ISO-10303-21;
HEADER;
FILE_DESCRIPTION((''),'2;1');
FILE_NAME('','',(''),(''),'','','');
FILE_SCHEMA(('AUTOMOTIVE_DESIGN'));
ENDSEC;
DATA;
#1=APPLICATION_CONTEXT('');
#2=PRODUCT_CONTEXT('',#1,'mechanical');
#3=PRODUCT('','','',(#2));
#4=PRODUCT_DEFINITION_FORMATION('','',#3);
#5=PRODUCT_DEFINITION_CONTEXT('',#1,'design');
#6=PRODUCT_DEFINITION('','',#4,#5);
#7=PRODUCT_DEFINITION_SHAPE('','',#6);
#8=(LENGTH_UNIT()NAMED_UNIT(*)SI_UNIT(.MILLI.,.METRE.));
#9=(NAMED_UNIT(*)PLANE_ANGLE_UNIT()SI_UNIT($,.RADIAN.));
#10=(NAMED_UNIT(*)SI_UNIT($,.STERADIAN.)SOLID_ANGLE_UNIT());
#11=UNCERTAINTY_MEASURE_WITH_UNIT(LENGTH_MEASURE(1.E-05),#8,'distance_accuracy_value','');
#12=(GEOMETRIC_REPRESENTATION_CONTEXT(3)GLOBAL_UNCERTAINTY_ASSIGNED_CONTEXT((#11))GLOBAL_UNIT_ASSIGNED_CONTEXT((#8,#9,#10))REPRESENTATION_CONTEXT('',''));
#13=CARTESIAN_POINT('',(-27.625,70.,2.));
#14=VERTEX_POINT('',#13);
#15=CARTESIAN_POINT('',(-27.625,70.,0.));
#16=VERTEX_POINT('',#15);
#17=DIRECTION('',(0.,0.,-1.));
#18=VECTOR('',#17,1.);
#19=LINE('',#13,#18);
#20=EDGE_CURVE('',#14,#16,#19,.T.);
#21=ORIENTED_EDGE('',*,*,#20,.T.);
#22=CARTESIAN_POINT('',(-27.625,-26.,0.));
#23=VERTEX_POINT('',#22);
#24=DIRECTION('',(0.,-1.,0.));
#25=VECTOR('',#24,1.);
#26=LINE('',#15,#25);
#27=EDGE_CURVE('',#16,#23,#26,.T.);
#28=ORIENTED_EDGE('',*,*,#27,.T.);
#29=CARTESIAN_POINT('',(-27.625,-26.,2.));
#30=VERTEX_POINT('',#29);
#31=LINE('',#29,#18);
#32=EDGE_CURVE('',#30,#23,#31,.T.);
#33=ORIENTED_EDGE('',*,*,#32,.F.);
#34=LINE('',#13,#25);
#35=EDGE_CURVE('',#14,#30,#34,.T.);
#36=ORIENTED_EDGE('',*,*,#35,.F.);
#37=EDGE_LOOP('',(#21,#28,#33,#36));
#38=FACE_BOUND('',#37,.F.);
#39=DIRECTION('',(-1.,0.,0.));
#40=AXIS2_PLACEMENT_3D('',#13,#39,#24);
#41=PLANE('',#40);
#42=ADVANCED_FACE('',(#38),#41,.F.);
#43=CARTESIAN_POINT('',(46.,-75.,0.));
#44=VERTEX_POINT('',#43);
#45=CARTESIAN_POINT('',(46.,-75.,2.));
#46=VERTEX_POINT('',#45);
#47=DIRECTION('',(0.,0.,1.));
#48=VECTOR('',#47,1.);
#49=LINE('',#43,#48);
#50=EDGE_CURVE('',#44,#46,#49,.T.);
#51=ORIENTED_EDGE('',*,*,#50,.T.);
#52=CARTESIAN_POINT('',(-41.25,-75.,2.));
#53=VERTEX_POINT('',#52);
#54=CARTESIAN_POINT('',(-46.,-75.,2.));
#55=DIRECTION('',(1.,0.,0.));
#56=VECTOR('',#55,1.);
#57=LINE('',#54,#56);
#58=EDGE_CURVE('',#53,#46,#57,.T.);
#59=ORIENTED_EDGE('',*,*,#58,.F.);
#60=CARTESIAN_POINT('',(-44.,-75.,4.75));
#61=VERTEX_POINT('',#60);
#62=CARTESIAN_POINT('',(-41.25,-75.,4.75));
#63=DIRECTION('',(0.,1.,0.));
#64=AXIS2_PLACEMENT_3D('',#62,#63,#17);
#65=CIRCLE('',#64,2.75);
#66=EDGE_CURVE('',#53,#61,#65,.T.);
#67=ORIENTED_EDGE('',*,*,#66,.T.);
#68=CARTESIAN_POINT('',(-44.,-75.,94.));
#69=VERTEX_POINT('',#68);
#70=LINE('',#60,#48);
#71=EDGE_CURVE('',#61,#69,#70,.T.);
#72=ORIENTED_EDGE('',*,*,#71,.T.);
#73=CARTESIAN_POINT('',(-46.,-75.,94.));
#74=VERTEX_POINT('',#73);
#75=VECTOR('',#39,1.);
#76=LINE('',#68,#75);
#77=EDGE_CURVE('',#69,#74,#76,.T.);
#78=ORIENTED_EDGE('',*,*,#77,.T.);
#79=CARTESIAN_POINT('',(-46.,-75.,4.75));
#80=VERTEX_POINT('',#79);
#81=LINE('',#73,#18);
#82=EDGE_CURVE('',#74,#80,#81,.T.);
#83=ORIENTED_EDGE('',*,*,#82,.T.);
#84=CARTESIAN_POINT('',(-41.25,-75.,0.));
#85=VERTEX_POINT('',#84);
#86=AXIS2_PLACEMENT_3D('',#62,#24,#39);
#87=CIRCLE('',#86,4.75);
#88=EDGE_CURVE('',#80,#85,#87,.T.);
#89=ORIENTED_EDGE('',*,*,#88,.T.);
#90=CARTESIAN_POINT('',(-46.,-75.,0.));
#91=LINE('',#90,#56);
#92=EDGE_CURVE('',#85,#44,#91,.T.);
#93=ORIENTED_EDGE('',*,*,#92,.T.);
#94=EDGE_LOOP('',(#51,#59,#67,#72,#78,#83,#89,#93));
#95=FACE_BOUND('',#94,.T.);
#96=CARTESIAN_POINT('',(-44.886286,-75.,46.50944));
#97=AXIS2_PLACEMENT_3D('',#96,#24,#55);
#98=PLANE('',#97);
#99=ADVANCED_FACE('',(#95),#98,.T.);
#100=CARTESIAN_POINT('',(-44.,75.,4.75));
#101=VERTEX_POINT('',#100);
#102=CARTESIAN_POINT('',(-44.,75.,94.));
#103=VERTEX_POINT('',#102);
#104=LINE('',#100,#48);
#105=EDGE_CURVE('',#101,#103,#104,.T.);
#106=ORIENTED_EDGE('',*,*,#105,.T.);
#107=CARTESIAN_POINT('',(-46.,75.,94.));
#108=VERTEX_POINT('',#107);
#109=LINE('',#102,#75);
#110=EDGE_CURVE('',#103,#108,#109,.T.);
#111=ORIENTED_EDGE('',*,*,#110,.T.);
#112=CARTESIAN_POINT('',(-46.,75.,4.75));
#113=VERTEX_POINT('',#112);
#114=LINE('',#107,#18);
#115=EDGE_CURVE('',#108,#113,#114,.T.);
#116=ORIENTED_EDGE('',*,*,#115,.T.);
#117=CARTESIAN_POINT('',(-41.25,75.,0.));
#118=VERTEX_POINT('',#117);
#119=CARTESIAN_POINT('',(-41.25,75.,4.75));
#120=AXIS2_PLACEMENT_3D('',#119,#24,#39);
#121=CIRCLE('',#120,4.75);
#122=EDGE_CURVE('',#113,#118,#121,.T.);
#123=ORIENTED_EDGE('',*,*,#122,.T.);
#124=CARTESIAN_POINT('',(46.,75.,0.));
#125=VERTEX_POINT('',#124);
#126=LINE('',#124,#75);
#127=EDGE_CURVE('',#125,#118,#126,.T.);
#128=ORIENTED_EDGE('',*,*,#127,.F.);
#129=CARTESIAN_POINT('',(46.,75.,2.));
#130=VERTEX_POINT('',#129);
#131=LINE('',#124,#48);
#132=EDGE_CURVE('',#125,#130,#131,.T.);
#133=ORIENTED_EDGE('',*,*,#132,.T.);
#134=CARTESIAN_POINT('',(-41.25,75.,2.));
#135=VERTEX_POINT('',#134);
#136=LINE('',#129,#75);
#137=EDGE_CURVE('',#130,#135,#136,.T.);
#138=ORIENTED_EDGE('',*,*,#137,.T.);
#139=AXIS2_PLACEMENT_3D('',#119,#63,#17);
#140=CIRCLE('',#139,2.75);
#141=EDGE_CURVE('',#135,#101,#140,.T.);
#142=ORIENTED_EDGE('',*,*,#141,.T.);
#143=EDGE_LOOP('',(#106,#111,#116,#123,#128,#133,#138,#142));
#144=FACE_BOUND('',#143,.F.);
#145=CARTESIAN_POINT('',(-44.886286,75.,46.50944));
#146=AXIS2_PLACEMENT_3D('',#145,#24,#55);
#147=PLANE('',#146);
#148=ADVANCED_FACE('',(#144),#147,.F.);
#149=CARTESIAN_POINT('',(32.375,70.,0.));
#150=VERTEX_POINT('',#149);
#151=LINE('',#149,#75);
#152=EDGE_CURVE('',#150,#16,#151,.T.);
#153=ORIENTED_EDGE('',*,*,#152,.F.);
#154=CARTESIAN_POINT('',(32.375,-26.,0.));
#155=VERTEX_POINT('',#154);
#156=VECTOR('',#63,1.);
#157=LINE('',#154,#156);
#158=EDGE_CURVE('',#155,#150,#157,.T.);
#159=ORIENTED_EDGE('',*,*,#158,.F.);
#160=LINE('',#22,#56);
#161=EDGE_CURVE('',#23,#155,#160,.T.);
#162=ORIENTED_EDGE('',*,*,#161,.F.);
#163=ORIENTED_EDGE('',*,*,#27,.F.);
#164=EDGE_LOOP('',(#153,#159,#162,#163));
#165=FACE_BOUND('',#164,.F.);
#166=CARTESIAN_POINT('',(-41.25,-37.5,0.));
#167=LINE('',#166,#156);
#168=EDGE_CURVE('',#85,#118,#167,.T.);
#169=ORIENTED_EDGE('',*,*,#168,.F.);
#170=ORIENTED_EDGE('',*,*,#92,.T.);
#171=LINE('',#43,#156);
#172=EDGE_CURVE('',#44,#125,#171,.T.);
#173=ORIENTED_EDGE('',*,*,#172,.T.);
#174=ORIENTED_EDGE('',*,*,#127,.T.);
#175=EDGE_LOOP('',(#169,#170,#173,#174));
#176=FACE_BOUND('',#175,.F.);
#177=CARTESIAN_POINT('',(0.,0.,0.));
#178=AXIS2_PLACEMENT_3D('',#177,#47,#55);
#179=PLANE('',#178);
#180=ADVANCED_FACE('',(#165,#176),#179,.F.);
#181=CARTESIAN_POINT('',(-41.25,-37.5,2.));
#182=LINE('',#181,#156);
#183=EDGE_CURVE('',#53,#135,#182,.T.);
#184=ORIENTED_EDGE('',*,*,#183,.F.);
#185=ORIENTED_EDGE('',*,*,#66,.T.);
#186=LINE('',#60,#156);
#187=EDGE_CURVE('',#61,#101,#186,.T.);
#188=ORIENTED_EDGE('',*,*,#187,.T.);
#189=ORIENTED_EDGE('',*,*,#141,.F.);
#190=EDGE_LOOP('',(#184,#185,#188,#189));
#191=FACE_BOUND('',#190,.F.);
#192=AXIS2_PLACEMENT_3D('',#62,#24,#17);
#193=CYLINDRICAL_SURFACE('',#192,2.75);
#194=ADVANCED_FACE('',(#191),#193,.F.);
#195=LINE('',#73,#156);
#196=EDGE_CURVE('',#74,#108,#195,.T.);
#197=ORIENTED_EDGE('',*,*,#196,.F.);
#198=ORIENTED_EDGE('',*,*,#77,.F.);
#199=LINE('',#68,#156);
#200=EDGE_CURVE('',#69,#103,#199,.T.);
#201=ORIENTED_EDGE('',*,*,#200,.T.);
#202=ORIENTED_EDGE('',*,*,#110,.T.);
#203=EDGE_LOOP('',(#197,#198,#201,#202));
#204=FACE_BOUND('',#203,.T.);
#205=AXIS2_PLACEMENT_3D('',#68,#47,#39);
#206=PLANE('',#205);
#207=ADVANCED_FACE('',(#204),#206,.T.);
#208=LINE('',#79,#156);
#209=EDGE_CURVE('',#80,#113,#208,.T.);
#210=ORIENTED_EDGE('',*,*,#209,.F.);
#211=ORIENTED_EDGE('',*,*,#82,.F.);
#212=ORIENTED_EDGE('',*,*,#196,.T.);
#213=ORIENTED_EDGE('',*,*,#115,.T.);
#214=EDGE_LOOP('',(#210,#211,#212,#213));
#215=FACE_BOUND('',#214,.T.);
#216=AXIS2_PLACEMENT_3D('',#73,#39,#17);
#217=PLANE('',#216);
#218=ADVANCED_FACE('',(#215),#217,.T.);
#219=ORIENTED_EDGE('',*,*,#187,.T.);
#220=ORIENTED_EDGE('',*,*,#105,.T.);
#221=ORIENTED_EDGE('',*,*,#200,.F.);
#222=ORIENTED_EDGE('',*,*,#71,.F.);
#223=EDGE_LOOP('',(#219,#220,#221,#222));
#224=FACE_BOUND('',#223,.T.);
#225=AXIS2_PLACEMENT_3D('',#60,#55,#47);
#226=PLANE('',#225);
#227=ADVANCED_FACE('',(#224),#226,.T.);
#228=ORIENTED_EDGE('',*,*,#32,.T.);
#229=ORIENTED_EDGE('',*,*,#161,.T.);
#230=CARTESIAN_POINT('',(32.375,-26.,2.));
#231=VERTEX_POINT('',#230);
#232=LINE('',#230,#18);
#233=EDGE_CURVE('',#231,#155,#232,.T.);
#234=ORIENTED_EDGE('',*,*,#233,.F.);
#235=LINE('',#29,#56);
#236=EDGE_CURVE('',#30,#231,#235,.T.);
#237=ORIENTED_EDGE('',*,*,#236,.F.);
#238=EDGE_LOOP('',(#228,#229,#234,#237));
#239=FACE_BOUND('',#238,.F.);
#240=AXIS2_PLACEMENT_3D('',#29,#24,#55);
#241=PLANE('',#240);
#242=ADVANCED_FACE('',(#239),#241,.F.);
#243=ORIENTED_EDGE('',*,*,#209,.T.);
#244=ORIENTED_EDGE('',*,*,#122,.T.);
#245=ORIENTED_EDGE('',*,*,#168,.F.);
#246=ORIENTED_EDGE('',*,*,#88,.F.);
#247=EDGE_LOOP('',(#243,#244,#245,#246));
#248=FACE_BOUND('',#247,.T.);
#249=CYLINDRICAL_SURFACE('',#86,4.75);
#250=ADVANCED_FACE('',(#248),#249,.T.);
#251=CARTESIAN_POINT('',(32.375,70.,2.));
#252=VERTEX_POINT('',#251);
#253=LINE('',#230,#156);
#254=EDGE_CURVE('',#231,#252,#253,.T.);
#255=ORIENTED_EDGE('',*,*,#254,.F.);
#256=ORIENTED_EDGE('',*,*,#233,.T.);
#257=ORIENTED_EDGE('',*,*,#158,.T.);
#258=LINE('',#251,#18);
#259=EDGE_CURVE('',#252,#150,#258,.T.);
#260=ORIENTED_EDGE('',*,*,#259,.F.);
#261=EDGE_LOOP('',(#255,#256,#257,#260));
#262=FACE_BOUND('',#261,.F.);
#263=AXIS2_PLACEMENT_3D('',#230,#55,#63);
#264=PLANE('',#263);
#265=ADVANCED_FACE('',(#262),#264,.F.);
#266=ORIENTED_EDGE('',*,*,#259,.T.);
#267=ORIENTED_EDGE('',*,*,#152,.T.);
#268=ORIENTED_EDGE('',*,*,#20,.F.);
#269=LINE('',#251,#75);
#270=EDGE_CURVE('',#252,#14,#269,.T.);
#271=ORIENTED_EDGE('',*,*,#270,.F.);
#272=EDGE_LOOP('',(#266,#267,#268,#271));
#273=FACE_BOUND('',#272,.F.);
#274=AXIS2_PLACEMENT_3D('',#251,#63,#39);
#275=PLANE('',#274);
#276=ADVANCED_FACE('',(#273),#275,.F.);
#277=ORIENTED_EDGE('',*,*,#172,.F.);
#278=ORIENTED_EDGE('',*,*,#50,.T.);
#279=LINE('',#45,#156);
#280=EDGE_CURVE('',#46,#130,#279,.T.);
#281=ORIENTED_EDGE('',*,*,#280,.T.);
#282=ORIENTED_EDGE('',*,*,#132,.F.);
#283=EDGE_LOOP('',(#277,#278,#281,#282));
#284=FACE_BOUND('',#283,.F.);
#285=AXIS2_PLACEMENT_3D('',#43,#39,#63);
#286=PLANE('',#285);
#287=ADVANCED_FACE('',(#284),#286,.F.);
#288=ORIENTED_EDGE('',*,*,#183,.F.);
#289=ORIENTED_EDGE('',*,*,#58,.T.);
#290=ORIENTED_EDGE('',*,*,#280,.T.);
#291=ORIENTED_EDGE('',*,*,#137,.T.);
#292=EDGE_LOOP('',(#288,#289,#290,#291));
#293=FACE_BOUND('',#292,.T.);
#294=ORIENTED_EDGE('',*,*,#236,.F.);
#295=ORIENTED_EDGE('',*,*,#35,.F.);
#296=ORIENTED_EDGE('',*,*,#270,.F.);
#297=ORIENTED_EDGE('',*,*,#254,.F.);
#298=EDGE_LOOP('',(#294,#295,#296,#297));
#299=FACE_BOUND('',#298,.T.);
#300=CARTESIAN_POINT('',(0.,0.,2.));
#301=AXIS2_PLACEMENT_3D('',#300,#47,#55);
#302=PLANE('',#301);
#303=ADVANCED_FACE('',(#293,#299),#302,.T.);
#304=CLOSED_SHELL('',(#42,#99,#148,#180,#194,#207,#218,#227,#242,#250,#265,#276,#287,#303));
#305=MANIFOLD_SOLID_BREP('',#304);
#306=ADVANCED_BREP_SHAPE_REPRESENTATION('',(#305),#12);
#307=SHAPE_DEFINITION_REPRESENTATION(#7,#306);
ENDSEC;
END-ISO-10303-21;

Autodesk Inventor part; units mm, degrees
ref_plane "YZ Plane" through (0, 0, 0) normal (1, 0, 0) x (0, 1, 0)
ref_plane "XZ Plane" through (0, 0, 0) normal (0, 1, 0) x (-1, 0, 0)
ref_plane "XY Plane" through (0, 0, 0) normal (0, 0, 1) x (1, 0, 0)
sketch "Sketch1" plane through (0, 0, 0) normal (0, 0, 1) x (1, 0, 0)
  line L0 (-46, -75) -> (46, -75)
  line L1 (46, -75) -> (46, 75)
  line L2 (46, 75) -> (-46, 75)
  line L3 (-46, 75) -> (-46, -75)
  line L4 (-46, -75) -> (46, 75) construction
  line L5 (46, -75) -> (-46, 75) construction
  point P0 (0, 0)
  dimension "d154" = 92
  dimension "d155" = 150
extrude "Plate5" add sketch "Sketch1" along normal blind 2
sketch "Sketch7" plane through (-44, -75, 0) normal (-1, 0, 0) x (0, -1, 0)
  line L0 (-150, 0) -> (0, 0)
  line L1 (0, 0) -> (0, 94)
  line L2 (0, 94) -> (-150, 94)
  line L3 (-150, 94) -> (-150, 0)
edge flange "Flange3" height 94 angle 90 thickness 2 bend radius 2.75 thickness toward (-1, 0, 0) relief round relief width 2 relief depth 1 edges at (-46, 0, 2) wall of the first edge with corners at (-44, 75, 0) (-44, -75, 0) (-44, -75, 94) (-44, 75, 94)
bend "Bend3"
corner "Corner3"
sketch "Sketch8" plane through (0, 0, 2) normal (0, 0, 1) x (1, 0, 0)
  line L0 (46, 75) -> (46, -75) projected
  line L1 (-41.25, 75) -> (46, 75) projected
  line L2 (32.375, 70) -> (-27.625, 70)
  line L3 (-27.625, 70) -> (-27.625, -26)
  line L4 (-27.625, -26) -> (32.375, -26)
  line L5 (32.375, -26) -> (32.375, 70)
  line L6 (32.375, 70) -> (-27.625, -26) construction
  line L7 (-27.625, 70) -> (32.375, -26) construction
  point P0 (0, 0)
  point P1 (2.375, 22)
  point P2 (2.375, 75)
  dimension "d167" = 60
  dimension "d168" = 96
  dimension "d169" = 5
extrude "Cut1" cut sketch "Sketch8" against normal blind 2
properties part number "PNS 1652 FDS Central tube wall" material "Stainless Steel"
